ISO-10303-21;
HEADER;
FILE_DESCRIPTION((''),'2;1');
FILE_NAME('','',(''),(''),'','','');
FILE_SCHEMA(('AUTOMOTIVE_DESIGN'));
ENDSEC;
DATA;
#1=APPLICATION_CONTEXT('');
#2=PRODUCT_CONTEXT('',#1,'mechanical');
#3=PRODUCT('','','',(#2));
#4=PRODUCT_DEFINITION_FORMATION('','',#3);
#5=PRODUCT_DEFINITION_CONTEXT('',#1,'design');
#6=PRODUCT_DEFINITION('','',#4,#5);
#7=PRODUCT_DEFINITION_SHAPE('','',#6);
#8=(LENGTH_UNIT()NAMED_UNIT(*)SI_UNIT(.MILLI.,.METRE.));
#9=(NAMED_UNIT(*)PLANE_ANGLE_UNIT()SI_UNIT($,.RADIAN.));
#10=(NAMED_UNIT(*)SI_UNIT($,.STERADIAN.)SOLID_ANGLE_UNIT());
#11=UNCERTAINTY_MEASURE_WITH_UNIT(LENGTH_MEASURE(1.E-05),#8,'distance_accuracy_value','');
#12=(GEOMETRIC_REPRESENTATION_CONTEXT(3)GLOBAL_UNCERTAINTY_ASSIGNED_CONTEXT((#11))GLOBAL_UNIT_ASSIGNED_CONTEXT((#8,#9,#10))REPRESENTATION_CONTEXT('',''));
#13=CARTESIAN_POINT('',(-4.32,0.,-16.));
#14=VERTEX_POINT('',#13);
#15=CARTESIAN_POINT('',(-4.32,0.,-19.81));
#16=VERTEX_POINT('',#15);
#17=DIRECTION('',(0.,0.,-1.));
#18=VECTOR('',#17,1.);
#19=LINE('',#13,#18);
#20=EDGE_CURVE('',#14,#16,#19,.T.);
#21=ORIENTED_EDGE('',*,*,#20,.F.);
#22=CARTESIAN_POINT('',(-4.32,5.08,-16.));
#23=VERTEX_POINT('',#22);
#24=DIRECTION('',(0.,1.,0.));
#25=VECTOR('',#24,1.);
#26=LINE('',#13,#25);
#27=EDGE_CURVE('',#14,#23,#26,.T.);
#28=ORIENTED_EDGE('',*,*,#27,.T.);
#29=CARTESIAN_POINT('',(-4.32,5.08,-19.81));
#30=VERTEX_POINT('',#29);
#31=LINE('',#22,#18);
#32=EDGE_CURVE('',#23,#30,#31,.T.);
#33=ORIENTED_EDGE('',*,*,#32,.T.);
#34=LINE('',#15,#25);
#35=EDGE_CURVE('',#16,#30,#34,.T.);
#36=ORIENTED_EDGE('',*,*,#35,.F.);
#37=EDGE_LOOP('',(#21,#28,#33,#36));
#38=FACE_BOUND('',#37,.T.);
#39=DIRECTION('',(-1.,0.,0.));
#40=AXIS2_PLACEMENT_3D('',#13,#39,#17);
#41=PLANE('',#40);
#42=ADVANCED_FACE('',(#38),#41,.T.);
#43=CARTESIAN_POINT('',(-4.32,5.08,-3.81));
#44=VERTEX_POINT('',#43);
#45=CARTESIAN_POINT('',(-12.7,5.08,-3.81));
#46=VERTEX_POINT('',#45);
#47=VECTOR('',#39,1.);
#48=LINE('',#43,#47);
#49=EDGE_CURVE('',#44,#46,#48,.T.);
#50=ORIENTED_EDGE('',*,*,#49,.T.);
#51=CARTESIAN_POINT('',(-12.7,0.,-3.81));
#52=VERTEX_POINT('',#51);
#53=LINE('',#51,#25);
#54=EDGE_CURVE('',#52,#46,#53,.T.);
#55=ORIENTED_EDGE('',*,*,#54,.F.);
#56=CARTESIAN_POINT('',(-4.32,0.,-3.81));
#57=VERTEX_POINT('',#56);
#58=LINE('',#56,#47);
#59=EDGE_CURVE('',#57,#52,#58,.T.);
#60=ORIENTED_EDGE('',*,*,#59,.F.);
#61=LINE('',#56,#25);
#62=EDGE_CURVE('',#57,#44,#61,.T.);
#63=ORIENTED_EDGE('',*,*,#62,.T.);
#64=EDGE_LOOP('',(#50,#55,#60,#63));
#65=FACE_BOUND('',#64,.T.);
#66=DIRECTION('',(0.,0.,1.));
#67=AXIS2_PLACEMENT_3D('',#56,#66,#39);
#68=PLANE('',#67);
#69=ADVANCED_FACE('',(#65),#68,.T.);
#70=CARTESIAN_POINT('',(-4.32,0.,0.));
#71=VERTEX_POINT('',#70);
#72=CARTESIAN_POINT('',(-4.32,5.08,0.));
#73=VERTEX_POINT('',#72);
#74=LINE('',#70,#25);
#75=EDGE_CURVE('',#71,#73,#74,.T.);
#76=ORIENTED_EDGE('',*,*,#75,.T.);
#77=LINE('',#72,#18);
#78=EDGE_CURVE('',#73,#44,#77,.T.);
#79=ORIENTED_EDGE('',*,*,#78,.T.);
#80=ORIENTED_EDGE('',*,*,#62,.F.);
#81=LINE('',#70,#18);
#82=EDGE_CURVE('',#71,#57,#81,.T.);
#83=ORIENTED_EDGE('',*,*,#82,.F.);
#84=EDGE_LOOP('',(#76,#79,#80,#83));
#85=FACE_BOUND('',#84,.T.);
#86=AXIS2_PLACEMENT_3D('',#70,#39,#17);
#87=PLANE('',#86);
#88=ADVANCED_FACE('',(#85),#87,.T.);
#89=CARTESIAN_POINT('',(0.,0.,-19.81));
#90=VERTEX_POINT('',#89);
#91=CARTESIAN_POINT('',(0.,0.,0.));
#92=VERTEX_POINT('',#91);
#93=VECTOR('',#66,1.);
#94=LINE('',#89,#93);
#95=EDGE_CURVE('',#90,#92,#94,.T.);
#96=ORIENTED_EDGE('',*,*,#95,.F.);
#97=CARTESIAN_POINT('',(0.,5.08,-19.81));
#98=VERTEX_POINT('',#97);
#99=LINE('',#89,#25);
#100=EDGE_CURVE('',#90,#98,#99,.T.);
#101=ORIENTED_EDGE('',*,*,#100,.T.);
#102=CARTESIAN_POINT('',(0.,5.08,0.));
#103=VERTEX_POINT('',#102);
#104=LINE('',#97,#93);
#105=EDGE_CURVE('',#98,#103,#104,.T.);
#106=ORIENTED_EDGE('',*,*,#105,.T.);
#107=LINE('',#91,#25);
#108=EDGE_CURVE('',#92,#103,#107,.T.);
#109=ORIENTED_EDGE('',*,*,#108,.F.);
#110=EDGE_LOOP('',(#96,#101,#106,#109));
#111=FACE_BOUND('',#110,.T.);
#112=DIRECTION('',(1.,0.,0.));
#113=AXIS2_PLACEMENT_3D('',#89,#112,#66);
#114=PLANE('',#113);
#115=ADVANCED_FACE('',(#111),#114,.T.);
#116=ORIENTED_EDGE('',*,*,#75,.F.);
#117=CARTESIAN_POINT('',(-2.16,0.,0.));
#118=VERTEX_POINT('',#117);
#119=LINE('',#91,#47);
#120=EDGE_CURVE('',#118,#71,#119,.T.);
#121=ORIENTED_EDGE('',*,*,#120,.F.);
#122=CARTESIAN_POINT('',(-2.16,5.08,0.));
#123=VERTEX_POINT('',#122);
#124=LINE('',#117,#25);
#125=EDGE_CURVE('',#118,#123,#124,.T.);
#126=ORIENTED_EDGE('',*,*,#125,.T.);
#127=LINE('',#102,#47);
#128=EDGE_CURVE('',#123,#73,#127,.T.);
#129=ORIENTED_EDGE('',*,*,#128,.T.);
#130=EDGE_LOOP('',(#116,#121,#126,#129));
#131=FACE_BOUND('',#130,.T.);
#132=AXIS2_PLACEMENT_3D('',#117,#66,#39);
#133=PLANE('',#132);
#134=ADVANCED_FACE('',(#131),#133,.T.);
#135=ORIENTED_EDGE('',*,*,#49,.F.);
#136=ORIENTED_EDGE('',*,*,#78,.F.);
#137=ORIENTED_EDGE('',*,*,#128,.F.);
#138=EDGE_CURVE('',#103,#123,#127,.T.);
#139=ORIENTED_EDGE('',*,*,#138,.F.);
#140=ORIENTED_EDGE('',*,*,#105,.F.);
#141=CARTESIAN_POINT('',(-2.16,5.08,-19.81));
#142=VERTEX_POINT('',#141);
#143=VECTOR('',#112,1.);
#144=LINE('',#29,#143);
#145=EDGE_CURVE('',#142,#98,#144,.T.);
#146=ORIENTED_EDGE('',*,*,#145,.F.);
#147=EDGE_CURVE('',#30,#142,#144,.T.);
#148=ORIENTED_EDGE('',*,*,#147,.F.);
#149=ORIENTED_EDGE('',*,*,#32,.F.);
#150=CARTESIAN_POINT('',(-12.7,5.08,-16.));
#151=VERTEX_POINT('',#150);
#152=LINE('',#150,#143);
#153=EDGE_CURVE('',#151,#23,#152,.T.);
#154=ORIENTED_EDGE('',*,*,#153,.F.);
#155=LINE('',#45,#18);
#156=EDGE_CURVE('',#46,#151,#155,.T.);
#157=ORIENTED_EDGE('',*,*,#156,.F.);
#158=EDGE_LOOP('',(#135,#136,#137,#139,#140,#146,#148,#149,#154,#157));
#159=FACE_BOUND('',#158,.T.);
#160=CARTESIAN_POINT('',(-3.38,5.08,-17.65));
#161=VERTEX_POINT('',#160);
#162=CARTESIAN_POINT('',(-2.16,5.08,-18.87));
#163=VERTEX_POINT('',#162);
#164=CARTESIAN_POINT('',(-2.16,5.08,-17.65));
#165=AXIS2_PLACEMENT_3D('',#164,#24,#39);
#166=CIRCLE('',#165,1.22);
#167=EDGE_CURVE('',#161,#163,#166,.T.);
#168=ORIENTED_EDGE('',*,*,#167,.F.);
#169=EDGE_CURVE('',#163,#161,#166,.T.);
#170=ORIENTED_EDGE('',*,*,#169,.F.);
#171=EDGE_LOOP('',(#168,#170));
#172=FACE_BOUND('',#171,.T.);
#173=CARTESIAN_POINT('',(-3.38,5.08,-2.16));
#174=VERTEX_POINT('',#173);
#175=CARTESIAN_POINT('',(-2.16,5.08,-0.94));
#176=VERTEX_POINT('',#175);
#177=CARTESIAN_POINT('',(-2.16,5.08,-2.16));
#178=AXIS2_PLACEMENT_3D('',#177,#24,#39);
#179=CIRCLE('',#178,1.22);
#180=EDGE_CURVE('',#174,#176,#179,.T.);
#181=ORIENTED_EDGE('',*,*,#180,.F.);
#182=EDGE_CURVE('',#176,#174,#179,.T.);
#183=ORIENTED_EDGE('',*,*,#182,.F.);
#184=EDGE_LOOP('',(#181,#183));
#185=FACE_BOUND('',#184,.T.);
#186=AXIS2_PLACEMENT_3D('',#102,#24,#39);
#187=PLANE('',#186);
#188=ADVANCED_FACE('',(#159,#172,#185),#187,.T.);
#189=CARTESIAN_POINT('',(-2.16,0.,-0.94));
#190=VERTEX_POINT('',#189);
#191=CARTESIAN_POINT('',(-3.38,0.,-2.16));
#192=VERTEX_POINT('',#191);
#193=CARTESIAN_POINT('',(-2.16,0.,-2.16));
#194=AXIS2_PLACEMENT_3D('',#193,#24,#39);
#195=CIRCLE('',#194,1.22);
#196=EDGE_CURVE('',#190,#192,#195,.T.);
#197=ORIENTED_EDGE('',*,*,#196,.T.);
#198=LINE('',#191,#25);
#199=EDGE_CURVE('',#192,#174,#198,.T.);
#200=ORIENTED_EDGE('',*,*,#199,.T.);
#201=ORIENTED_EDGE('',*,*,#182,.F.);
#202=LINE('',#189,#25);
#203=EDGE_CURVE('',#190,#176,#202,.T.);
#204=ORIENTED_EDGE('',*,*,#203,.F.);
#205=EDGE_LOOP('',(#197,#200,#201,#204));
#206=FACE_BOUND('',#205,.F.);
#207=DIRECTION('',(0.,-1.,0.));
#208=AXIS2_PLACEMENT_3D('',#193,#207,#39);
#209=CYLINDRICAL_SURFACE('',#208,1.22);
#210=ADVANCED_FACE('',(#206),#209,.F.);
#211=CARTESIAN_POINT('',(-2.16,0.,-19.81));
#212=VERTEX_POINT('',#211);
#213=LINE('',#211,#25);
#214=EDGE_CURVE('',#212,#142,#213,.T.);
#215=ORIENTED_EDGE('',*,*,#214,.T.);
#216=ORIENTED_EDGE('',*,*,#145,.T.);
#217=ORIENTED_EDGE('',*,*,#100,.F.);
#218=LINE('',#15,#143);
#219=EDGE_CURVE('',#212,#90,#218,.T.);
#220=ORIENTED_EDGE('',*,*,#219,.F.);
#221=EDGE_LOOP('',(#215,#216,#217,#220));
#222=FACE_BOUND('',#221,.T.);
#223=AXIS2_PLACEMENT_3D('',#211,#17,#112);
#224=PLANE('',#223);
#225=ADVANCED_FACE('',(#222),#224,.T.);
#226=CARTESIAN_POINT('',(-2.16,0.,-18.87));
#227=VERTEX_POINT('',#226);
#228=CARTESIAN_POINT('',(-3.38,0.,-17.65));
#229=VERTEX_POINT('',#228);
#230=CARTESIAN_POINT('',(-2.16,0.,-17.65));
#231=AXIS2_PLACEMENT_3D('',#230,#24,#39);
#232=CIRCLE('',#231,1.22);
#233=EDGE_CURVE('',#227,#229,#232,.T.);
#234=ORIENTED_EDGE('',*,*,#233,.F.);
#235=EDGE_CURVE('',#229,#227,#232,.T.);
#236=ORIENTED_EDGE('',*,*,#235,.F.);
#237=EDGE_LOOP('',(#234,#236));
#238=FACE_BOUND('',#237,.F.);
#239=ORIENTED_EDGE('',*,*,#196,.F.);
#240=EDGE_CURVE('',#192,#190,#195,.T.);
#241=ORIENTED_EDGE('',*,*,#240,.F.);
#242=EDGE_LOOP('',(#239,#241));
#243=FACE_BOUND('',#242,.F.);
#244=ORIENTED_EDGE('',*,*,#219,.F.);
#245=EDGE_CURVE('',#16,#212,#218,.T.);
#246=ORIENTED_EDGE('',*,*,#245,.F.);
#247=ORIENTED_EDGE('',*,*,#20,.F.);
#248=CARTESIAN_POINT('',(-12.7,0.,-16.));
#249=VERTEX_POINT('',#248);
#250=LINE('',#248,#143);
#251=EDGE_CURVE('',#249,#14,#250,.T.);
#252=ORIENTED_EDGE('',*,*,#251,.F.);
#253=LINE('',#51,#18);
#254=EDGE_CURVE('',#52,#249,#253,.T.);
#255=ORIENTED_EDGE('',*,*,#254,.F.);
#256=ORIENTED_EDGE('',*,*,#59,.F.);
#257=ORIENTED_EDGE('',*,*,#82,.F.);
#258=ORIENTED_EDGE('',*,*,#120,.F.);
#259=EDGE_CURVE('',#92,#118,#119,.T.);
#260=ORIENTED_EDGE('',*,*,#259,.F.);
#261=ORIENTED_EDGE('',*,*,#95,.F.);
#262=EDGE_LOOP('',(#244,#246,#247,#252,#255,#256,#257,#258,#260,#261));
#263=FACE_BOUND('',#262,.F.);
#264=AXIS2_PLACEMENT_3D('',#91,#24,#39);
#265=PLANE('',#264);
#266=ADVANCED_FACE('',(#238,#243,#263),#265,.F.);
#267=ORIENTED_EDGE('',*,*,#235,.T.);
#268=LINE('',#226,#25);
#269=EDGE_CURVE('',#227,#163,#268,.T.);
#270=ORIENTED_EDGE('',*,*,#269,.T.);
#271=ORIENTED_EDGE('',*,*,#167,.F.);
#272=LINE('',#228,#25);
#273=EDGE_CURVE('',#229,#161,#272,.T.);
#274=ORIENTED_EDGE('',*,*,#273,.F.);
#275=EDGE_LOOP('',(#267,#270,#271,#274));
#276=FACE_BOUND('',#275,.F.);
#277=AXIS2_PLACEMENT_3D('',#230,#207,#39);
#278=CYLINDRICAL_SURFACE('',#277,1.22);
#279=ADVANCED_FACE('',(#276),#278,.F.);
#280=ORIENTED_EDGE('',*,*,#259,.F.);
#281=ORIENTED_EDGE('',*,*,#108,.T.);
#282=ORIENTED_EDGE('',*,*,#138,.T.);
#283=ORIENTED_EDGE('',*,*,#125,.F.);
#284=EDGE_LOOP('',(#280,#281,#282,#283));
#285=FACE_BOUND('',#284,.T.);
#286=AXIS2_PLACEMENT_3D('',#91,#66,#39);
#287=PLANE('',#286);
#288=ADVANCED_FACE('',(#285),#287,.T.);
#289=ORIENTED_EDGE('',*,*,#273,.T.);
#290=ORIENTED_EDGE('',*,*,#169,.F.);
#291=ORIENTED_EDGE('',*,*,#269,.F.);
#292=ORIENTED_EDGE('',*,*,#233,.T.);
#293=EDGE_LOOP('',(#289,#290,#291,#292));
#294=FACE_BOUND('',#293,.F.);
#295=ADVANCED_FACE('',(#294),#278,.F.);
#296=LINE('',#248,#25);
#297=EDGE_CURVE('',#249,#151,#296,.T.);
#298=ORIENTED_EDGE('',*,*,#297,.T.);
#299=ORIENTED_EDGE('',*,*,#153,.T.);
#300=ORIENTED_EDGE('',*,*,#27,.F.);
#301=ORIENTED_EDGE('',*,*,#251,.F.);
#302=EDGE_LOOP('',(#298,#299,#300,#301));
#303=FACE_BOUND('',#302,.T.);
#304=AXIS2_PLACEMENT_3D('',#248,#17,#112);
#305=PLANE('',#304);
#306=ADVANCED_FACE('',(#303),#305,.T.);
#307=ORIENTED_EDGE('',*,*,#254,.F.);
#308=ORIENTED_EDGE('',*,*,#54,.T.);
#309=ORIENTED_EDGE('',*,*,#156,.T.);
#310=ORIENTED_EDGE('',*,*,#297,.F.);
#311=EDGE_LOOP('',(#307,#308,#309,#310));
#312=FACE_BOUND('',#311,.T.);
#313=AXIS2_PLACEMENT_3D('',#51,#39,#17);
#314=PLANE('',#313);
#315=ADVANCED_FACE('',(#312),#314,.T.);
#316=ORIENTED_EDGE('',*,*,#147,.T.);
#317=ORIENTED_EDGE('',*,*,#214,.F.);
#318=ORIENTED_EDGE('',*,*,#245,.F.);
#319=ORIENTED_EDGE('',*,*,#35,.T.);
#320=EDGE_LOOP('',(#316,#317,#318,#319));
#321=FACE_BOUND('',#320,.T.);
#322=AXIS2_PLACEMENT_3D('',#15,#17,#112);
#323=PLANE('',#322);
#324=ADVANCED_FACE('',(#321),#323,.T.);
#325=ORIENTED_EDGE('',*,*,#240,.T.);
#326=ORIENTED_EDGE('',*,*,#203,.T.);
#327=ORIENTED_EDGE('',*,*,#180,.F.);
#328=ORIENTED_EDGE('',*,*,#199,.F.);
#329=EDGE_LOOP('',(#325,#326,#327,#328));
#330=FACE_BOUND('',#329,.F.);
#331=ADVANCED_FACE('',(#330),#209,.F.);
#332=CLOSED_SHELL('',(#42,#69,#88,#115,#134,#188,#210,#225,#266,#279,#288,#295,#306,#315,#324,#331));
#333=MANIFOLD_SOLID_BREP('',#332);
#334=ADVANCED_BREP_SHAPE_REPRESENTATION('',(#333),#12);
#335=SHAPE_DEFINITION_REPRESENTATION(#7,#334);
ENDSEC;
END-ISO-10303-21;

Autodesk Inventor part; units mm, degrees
ref_plane "YZ Plane" through (0, 0, 0) normal (1, 0, 0) x (0, 1, 0)
ref_plane "XZ Plane" through (0, 0, 0) normal (0, 1, 0) x (-1, 0, 0)
ref_plane "XY Plane" through (0, 0, 0) normal (0, 0, 1) x (1, 0, 0)
sketch "Skizze1" plane through (0, 0, 0) normal (0, 1, 0) x (-1, 0, 0)
  line L0 (0, 0) -> (4.32, 0)
  line L1 (4.32, 0) -> (4.32, -3.81)
  line L2 (4.32, -3.81) -> (12.7, -3.81)
  line L3 (12.7, -3.81) -> (12.7, -16)
  line L4 (12.7, -16) -> (4.32, -16)
  line L5 (4.32, -16) -> (4.32, -19.81)
  line L6 (4.32, -19.81) -> (0, -19.81)
  line L7 (0, -19.81) -> (0, 0)
  line L8 (2.16, 0) -> (2.16, -2.16)
  line L9 (2.16, -19.81) -> (2.16, -17.65)
  circle A0 centre (2.16, -2.16) radius 1.22
  circle A1 centre (2.16, -17.65) radius 1.22
  dimension "d0" = 4.32
  dimension "d1" = 3.81
  dimension "d2" = 8.38
  dimension "d3" = 12.19
  dimension "d4" = 3.81
  dimension "d5" = 2.16
  dimension "d6" = 2.16
  dimension "d7" = 2.44
  dimension "d8" = 2.44
extrude "Extrusion1" add sketch "Skizze1" along normal blind 5.08
properties part number "OPB732" material "LCP-Kunststoff"
